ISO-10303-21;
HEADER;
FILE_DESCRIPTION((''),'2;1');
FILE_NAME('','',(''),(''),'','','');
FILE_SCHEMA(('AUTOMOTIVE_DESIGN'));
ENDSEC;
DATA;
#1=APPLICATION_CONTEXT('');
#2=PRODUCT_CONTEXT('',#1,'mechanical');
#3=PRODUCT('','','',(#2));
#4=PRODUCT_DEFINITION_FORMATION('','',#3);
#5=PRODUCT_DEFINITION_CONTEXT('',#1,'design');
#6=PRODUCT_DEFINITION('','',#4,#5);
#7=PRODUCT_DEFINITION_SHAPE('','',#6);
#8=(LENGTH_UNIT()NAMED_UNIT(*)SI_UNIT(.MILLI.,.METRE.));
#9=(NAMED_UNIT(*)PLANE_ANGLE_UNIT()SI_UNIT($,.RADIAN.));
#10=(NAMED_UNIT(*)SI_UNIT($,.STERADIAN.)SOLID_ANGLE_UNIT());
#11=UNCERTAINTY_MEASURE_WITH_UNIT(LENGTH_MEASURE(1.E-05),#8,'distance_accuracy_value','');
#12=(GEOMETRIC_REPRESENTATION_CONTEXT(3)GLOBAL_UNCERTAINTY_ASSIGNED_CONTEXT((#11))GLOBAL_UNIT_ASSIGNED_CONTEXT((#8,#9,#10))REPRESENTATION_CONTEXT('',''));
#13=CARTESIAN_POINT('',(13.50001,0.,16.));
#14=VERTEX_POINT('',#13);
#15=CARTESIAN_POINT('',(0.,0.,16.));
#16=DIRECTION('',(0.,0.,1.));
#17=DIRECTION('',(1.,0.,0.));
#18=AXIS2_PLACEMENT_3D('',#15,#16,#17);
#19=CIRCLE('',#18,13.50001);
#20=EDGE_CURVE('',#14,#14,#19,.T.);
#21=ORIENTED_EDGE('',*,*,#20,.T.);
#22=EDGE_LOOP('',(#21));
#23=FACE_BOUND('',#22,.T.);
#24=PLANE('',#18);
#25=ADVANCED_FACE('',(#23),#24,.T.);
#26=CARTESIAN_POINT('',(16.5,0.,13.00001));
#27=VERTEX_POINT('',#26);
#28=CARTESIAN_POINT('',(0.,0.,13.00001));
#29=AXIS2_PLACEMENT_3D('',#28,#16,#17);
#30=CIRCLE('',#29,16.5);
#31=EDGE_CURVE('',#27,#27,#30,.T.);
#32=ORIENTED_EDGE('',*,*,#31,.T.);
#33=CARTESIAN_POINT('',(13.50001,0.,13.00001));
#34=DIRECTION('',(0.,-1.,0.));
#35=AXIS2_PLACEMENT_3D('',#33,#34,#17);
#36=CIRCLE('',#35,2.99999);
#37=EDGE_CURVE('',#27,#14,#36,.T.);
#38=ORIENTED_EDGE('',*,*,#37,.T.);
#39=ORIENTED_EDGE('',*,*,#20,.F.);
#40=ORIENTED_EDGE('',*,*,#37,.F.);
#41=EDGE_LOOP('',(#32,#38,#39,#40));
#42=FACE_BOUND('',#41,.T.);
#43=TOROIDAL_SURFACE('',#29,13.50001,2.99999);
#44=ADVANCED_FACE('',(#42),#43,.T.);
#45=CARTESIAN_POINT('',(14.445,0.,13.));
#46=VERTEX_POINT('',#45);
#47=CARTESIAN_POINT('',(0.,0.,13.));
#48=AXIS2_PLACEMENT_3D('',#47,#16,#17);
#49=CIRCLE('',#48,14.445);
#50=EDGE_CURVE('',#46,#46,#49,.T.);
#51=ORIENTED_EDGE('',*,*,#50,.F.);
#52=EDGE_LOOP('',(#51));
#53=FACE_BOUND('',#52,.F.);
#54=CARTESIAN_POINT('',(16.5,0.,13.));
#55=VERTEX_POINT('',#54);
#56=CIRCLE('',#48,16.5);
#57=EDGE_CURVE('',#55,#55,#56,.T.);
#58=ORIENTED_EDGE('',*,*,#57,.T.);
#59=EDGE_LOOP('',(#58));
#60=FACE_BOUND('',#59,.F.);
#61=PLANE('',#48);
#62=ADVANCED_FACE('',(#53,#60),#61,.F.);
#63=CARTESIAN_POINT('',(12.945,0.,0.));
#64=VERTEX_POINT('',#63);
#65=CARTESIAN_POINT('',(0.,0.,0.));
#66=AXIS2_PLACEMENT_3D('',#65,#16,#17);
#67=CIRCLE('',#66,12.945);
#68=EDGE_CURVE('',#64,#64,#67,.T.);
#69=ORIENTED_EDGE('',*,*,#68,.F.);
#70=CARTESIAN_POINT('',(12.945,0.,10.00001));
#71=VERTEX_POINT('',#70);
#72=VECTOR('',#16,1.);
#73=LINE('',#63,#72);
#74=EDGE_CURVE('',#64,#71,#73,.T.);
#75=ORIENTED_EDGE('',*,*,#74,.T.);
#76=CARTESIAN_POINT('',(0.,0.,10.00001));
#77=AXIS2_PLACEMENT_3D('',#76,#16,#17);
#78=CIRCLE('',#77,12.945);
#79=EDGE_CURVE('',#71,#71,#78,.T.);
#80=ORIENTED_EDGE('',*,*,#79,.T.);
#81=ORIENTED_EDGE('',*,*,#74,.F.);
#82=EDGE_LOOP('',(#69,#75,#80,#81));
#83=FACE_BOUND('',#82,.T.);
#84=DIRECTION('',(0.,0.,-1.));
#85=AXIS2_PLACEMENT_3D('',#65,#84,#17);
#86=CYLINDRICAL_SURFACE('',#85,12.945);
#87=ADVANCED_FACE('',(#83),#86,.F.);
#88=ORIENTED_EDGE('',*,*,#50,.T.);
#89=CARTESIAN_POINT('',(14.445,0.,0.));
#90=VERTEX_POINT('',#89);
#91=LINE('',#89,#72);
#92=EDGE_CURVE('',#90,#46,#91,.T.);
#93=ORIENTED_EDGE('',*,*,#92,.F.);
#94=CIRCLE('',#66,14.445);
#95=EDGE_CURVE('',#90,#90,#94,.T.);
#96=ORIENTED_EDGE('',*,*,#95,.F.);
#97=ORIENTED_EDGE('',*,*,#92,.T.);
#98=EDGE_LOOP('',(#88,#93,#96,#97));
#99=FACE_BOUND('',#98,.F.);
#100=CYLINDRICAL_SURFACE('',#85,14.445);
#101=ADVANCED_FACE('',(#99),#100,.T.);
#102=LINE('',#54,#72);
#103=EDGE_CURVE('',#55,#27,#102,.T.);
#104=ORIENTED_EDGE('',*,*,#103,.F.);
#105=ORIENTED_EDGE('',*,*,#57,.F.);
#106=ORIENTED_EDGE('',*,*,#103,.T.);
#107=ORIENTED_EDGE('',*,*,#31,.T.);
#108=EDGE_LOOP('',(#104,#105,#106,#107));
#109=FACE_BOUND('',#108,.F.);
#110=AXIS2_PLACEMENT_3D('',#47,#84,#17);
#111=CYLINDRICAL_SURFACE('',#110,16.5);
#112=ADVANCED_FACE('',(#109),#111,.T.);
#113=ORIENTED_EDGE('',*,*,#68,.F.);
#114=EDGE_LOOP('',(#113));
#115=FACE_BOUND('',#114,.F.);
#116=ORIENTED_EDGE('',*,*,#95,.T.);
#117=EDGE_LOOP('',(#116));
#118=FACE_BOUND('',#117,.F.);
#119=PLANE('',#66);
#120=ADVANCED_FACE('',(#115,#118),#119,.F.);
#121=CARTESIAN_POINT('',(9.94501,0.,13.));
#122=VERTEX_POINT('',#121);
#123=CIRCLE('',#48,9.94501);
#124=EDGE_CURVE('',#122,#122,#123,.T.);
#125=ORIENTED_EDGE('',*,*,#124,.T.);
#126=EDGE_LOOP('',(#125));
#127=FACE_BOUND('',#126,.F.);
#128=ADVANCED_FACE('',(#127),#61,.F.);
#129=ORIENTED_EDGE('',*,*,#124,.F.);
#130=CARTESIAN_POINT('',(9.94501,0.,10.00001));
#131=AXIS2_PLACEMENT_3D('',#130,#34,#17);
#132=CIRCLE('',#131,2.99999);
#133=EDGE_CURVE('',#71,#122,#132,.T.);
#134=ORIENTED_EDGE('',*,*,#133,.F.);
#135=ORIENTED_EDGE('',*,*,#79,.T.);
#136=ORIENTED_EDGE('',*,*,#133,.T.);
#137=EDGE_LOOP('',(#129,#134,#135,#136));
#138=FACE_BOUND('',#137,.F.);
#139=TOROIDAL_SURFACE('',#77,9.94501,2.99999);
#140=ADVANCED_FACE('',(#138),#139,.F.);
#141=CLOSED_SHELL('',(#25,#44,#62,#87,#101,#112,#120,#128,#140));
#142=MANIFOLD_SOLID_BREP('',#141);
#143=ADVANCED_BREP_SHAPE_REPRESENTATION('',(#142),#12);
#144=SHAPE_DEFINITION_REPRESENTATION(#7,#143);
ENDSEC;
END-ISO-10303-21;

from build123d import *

# Parameters (mm, degrees)
F0_R     = 14.445
F0_R_2   = 12.945
F1_DEPTH = 13
F2_R     = 16.5
F3_DEPTH = 3
F4_R     = 2.99999


# Not quite as in the source:
# - a fillet or chamfer is up to 0.001 mm smaller than in the source, because OpenCascade refuses the exact size


with BuildPart() as f1:
    # F0 (on Top) → F1 (new body)
    with BuildSketch(Plane.XY):
        Circle(F0_R)
        Circle(F0_R_2, mode=Mode.SUBTRACT)
    extrude(amount=F1_DEPTH)

    # F2 (on face) → F3 (join)
    with BuildSketch(Plane.XY.offset(13)):
        Circle(F2_R)
    extrude(amount=F3_DEPTH)

    # F4 (radius 3 in the source; OpenCascade refuses exactly that, so slightly less here)
    f4_edges = [f1.edges().sort_by_distance(p)[0] for p in [
        (-16.5, 0, 16),
        (-12.945, 0, 13),
    ]]
    fillet(f4_edges, radius=F4_R)


solid = f1.part
